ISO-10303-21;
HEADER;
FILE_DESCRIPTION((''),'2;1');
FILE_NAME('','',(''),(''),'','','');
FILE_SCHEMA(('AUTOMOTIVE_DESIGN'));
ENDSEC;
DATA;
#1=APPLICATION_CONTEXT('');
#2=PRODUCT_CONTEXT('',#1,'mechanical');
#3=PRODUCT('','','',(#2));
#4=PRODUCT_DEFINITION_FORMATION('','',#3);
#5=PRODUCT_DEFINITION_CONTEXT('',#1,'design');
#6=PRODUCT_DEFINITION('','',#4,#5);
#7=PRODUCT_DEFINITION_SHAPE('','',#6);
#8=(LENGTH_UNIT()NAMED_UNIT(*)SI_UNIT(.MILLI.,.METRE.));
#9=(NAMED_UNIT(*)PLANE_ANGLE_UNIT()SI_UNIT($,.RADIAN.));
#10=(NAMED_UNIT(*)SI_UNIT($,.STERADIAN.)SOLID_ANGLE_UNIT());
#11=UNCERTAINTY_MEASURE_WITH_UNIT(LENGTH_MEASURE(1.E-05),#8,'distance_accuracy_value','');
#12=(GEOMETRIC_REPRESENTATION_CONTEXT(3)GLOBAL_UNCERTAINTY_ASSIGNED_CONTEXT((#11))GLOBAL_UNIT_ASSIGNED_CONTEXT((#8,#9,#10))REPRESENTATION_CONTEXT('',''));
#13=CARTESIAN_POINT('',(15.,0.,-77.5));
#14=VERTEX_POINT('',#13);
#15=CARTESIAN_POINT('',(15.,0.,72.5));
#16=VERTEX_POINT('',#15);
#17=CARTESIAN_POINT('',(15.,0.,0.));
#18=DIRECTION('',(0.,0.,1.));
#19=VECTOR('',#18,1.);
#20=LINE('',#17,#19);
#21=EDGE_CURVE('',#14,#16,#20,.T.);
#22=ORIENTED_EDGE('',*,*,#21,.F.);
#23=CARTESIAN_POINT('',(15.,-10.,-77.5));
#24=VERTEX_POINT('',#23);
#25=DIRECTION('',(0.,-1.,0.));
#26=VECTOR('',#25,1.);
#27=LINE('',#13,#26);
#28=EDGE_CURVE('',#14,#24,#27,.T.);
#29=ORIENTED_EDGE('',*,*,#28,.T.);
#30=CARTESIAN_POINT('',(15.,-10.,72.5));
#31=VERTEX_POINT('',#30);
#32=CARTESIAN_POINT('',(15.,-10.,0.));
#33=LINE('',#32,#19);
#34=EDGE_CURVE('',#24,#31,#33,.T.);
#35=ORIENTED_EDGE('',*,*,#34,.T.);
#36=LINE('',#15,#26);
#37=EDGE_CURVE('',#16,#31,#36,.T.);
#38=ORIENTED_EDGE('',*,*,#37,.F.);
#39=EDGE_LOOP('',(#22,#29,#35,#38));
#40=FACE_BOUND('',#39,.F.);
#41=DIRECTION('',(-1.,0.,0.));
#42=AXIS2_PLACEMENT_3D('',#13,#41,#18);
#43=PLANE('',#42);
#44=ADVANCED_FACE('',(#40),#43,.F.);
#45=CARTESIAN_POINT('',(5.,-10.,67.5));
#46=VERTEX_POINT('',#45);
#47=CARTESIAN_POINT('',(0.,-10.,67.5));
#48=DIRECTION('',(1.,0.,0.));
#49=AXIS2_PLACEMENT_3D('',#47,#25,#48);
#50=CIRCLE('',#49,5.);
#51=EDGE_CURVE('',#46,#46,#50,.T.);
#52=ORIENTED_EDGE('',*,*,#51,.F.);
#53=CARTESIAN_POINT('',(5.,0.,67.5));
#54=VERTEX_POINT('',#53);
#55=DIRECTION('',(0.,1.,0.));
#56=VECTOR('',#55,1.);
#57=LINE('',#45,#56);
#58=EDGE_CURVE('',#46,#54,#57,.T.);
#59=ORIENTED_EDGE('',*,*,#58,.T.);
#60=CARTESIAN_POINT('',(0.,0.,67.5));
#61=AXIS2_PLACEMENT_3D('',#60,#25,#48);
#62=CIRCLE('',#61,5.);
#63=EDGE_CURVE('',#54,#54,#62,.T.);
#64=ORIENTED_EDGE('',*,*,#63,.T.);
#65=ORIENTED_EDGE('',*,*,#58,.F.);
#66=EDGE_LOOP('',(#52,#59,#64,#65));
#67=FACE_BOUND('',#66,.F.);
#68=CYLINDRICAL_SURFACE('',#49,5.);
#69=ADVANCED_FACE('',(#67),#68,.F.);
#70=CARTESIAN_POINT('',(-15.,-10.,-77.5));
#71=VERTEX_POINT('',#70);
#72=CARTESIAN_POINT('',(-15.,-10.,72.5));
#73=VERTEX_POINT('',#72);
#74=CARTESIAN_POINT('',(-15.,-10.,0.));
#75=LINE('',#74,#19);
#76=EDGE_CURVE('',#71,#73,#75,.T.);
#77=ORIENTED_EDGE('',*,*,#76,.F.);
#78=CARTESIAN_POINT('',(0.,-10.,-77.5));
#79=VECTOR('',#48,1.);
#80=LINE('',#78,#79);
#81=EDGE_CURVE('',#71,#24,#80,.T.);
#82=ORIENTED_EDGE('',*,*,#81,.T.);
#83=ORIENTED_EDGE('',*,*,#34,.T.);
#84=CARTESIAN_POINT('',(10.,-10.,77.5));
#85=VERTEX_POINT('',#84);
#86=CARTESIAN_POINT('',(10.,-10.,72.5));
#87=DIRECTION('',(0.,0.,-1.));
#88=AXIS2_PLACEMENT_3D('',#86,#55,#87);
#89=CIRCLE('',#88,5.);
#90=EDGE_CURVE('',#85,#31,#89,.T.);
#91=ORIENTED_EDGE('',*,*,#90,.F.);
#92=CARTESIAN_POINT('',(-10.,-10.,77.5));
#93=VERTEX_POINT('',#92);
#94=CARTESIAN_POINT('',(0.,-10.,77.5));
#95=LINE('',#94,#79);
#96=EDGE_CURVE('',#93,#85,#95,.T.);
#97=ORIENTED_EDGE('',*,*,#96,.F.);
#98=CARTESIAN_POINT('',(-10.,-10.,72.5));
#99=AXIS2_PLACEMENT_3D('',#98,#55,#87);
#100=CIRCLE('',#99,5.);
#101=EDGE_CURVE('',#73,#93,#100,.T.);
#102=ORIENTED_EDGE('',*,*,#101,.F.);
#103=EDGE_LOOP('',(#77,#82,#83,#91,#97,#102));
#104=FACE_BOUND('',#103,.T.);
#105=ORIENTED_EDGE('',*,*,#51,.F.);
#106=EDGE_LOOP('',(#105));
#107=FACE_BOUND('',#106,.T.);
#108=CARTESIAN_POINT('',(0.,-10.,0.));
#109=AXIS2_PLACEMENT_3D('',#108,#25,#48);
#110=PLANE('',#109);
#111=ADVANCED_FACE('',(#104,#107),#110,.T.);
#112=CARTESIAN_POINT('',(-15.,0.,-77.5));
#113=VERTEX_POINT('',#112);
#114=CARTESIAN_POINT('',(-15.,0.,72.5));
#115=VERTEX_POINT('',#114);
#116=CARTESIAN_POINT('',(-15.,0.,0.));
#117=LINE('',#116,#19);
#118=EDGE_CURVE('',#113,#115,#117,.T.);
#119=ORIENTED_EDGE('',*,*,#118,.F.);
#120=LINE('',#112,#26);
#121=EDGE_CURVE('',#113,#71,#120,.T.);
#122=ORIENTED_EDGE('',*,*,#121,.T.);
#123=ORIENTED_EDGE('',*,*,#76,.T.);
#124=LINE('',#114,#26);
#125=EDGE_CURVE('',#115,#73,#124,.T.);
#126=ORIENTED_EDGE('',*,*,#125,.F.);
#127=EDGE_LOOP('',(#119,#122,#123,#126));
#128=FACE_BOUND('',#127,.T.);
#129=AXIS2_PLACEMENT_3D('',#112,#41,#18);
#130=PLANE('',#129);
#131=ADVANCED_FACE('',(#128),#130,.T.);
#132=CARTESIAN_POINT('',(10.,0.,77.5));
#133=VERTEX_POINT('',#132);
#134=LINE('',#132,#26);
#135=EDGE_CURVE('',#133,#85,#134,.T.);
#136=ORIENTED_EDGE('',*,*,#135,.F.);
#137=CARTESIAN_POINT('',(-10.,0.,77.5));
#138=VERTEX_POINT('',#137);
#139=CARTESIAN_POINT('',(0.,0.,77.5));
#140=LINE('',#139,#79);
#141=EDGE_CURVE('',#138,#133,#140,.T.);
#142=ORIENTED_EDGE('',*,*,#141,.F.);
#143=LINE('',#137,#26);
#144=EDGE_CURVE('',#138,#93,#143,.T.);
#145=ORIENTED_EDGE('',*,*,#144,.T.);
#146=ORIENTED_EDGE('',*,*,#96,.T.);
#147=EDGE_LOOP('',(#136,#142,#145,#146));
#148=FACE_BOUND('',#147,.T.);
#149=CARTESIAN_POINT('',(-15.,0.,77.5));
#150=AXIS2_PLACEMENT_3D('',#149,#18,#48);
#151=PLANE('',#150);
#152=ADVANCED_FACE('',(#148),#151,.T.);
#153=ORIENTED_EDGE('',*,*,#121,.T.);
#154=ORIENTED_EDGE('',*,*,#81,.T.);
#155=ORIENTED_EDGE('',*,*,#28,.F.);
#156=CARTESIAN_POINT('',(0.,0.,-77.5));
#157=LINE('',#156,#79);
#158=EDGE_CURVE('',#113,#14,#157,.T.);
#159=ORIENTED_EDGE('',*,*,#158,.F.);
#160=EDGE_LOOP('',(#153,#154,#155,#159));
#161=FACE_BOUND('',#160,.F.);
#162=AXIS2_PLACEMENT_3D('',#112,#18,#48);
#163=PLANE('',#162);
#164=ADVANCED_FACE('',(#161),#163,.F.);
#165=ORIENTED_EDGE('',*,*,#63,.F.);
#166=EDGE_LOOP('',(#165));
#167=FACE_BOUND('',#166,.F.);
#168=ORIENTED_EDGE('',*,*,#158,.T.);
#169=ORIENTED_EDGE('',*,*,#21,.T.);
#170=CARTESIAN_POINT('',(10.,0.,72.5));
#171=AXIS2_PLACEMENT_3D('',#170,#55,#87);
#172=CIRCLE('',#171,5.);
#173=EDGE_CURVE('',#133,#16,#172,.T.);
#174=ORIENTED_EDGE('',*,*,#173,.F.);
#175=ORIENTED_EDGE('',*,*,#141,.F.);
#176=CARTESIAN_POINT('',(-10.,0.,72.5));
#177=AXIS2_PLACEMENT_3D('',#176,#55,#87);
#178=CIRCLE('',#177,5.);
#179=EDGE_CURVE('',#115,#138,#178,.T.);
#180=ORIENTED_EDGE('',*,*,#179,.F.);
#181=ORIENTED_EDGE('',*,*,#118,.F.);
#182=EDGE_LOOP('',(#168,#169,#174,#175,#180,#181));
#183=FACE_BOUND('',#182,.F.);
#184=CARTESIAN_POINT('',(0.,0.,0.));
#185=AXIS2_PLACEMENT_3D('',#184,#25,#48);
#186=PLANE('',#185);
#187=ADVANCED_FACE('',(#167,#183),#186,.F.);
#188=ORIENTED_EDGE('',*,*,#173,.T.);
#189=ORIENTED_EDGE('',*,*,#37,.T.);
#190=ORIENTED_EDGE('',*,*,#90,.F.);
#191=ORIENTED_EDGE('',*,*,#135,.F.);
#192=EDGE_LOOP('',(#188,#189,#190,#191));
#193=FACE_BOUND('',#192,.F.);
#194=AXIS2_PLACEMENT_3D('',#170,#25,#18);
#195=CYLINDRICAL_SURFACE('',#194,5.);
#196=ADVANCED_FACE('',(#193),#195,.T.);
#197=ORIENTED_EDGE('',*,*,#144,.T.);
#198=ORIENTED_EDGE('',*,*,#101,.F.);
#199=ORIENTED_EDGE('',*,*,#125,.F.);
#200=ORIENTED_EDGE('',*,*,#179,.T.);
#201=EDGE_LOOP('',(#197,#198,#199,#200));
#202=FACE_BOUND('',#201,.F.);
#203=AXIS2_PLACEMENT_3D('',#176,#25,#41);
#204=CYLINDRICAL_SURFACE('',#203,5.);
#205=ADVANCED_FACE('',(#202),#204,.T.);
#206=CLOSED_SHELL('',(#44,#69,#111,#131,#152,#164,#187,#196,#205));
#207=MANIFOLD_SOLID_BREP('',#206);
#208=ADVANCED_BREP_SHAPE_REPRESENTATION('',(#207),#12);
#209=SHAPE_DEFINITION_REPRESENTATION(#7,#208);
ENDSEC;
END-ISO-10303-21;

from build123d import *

# Parameters (mm, degrees)
F0_W     = 30
F0_H     = 155
F1_DEPTH = 10
F2_R     = 5
F3_DEPTH = 10.001
F4_R     = 5


# Not quite as in the source:
# - a feature names something its author has since deleted; it is built from what else it names


with BuildPart() as f1:
    # F0 (on Front) → F1 (new body)
    with BuildSketch(Plane.XZ):
        Rectangle(F0_W, F0_H)
    extrude(amount=F1_DEPTH)

    # F2 (on face) → F3 (cut, through all)
    with BuildSketch(Plane.XZ.offset(10)):
        with Locations((0, 67.5)):
            Circle(F2_R)
    extrude(amount=-F3_DEPTH, mode=Mode.SUBTRACT)

    # F4
    f4_edges = [f1.edges().sort_by_distance(p)[0] for p in [
        (15, -5, 77.5),
        (-15, -5, 77.5),
    ]]
    fillet(f4_edges, radius=F4_R)


solid = f1.part
